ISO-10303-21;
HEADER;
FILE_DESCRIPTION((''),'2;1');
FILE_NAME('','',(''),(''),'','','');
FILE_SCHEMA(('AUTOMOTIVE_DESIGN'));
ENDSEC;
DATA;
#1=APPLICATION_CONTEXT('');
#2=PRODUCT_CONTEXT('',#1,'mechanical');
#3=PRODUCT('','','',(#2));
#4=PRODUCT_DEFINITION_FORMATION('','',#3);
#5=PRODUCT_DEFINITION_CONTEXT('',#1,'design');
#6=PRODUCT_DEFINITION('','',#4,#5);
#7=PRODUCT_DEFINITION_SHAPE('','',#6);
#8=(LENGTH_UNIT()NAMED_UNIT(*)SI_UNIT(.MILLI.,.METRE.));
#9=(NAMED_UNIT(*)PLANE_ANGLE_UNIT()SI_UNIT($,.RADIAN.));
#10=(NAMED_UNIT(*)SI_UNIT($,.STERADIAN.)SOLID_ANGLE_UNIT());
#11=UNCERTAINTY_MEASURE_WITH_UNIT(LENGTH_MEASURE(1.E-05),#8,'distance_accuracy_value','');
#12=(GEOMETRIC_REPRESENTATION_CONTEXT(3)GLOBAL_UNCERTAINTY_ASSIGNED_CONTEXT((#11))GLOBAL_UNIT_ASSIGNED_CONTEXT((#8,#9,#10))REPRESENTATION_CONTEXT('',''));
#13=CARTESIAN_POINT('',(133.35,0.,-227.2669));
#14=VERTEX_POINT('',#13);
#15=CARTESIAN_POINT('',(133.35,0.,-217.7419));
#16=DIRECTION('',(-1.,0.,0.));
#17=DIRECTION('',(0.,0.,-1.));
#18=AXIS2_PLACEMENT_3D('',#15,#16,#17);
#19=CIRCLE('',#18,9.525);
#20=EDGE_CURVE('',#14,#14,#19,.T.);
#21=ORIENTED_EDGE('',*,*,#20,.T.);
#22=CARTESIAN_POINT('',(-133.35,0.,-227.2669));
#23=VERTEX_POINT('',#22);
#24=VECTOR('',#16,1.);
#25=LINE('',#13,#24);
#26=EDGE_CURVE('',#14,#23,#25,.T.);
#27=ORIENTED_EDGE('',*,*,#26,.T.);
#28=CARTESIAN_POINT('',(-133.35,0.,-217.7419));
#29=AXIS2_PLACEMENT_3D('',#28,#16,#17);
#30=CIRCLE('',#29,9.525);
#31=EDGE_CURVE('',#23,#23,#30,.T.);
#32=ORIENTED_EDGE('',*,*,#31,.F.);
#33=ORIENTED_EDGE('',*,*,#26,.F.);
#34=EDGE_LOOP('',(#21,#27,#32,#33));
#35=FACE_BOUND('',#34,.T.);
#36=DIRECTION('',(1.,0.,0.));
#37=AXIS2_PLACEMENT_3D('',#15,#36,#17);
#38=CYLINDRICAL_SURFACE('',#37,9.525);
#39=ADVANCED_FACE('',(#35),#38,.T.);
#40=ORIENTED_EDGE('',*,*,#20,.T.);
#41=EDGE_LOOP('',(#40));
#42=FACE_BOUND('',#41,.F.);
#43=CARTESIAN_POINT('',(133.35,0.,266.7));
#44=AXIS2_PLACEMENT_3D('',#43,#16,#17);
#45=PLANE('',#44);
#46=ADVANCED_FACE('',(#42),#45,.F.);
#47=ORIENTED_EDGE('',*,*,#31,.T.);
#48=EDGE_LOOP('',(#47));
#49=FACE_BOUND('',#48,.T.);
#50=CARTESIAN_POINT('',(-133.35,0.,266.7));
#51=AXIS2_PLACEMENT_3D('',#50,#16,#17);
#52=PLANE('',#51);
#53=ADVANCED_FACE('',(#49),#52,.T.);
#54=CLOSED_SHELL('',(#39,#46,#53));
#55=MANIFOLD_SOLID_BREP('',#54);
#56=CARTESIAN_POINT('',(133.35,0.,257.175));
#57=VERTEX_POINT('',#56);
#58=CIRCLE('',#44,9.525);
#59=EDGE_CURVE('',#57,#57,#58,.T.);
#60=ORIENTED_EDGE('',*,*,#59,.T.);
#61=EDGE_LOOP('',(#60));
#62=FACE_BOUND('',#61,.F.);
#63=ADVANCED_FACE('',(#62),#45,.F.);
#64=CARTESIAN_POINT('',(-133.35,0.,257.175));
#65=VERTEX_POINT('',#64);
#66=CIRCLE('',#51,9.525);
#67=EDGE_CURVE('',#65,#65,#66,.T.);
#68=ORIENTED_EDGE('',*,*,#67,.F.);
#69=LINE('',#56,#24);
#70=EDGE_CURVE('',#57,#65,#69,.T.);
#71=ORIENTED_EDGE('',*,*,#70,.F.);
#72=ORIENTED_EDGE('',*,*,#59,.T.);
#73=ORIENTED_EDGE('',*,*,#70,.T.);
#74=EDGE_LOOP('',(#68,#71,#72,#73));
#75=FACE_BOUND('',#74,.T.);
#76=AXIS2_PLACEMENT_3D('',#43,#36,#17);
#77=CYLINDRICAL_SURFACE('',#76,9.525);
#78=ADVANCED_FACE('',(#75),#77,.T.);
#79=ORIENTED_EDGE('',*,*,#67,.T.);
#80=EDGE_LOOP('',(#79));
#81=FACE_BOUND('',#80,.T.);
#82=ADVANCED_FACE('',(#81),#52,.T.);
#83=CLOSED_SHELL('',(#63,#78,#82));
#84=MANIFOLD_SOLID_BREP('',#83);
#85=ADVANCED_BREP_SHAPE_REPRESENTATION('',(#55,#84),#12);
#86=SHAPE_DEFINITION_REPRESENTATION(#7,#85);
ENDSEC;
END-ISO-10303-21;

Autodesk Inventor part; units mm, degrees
ref_plane "YZ Plane" through (0, 0, 0) normal (1, 0, 0) x (0, 1, 0)
sketch "Dimensions" plane through (0, 0, 0) normal (0, 1, 0) x (-1, 0, 0)
  line L0 (288.9748, 0) -> (-288.9748, 0) construction
  line L1 (0, -373.38) -> (0, 373.38) construction
  line L2 (133.35, 266.7) -> (133.35, -266.7) construction
  line L3 (-133.35, 266.7) -> (-133.35, -266.7) construction
  line L4 (133.35, -266.7) -> (-133.35, -266.7) construction
  line L5 (133.35, 266.7) -> (-133.35, 266.7) construction
  point P0 (0, 0)
  dimension "d61" = 266.7
  dimension "d62" = 533.4
ref_plane "Kingpin Vertical Plane End C" through (-133.35, 0, 266.7) normal (0, 0, 1) x (1, 0, 0)
sketch "Kingpin Angles" plane through (-133.35, 0, 266.7) normal (0, 0, 1) x (1, 0, 0)
  line L0 (-73.0606, 22.4802) -> (73.0606, -22.4802)
  line L1 (339.7606, 22.4802) -> (193.6394, -22.4802)
  line L2 (38.1, -169.0624) -> (266.7, -169.0624)
  line L3 (0, 0) -> (-25.4, -82.55) construction
  line L4 (-25.4, -82.55) -> (0, -82.55) construction
  line L5 (0, -82.55) -> (0, 0) construction
  line L6 (266.7, 0) -> (292.1, -82.55) construction
  line L7 (292.1, -82.55) -> (266.7, -82.55) construction
  line L8 (266.7, -82.55) -> (266.7, 0) construction
  point P0 (133.35, 0)
  dimension "d67" = 169.0624
  dimension "d70" = 25.4
  dimension "d71" = 82.55
ref_plane "Kingpin Tops Side A" through (-206.4106, 22.4802, 266.7) normal (0.2940858, 0.955779, 0) x (0.955779, -0.2940858, 0)
ref_plane "Kingpin Tops Side B" through (60.2894, -22.4802, 266.7) normal (-0.2940858, 0.955779, 0) x (0.955779, 0.2940858, 0)
sketch "Sketch15" plane through (-206.4106, 22.4802, 266.7) normal (0.2940858, 0.955779, 0) x (0.955779, -0.2940858, 0)
  line L0 (76.4409, 0) -> (76.4409, 533.4)
  point P0 (203.894, 266.7)
sketch "Sketch16" plane through (60.2894, -22.4802, 266.7) normal (-0.2940858, 0.955779, 0) x (0.955779, 0.2940858, 0)
  line L0 (76.4409, 0) -> (76.4409, 533.4)
  point P0 (-51.0122, 266.7)
ref_plane "Ground Plane (Dead Ahead)" through (-95.25, -169.0624, 266.7) normal (0, 1, 0) x (1, 0, 0)
sketch "Ground Center" plane through (-95.25, -169.0624, 266.7) normal (0, 1, 0) x (1, 0, 0)
  line L0 (95.25, 640.08) -> (95.25, -106.68) construction
  line L1 (-193.7248, 266.7) -> (384.2248, 266.7) construction
  point P0 (95.25, 266.7)
  point P1 (95.25, 266.7)
ref_plane "Axle Ends" through (133.35, 0, 266.7) normal (-1, 0, 0) x (0, 0, -1)
sketch "Sketch18" plane through (133.35, 0, 266.7) normal (-1, 0, 0) x (0, 0, -1)
  circle A0 centre (0, 0) radius 9.525
  circle A1 centre (484.4419, 0) radius 9.525
  point P0 (266.7, 0)
  dimension "d73" = 19.05
  dimension "d74" = 19.05
extrude "Axles" add sketch "Sketch18" along normal up to surface (266.7 mm away)
properties part number "Wheelbase"
